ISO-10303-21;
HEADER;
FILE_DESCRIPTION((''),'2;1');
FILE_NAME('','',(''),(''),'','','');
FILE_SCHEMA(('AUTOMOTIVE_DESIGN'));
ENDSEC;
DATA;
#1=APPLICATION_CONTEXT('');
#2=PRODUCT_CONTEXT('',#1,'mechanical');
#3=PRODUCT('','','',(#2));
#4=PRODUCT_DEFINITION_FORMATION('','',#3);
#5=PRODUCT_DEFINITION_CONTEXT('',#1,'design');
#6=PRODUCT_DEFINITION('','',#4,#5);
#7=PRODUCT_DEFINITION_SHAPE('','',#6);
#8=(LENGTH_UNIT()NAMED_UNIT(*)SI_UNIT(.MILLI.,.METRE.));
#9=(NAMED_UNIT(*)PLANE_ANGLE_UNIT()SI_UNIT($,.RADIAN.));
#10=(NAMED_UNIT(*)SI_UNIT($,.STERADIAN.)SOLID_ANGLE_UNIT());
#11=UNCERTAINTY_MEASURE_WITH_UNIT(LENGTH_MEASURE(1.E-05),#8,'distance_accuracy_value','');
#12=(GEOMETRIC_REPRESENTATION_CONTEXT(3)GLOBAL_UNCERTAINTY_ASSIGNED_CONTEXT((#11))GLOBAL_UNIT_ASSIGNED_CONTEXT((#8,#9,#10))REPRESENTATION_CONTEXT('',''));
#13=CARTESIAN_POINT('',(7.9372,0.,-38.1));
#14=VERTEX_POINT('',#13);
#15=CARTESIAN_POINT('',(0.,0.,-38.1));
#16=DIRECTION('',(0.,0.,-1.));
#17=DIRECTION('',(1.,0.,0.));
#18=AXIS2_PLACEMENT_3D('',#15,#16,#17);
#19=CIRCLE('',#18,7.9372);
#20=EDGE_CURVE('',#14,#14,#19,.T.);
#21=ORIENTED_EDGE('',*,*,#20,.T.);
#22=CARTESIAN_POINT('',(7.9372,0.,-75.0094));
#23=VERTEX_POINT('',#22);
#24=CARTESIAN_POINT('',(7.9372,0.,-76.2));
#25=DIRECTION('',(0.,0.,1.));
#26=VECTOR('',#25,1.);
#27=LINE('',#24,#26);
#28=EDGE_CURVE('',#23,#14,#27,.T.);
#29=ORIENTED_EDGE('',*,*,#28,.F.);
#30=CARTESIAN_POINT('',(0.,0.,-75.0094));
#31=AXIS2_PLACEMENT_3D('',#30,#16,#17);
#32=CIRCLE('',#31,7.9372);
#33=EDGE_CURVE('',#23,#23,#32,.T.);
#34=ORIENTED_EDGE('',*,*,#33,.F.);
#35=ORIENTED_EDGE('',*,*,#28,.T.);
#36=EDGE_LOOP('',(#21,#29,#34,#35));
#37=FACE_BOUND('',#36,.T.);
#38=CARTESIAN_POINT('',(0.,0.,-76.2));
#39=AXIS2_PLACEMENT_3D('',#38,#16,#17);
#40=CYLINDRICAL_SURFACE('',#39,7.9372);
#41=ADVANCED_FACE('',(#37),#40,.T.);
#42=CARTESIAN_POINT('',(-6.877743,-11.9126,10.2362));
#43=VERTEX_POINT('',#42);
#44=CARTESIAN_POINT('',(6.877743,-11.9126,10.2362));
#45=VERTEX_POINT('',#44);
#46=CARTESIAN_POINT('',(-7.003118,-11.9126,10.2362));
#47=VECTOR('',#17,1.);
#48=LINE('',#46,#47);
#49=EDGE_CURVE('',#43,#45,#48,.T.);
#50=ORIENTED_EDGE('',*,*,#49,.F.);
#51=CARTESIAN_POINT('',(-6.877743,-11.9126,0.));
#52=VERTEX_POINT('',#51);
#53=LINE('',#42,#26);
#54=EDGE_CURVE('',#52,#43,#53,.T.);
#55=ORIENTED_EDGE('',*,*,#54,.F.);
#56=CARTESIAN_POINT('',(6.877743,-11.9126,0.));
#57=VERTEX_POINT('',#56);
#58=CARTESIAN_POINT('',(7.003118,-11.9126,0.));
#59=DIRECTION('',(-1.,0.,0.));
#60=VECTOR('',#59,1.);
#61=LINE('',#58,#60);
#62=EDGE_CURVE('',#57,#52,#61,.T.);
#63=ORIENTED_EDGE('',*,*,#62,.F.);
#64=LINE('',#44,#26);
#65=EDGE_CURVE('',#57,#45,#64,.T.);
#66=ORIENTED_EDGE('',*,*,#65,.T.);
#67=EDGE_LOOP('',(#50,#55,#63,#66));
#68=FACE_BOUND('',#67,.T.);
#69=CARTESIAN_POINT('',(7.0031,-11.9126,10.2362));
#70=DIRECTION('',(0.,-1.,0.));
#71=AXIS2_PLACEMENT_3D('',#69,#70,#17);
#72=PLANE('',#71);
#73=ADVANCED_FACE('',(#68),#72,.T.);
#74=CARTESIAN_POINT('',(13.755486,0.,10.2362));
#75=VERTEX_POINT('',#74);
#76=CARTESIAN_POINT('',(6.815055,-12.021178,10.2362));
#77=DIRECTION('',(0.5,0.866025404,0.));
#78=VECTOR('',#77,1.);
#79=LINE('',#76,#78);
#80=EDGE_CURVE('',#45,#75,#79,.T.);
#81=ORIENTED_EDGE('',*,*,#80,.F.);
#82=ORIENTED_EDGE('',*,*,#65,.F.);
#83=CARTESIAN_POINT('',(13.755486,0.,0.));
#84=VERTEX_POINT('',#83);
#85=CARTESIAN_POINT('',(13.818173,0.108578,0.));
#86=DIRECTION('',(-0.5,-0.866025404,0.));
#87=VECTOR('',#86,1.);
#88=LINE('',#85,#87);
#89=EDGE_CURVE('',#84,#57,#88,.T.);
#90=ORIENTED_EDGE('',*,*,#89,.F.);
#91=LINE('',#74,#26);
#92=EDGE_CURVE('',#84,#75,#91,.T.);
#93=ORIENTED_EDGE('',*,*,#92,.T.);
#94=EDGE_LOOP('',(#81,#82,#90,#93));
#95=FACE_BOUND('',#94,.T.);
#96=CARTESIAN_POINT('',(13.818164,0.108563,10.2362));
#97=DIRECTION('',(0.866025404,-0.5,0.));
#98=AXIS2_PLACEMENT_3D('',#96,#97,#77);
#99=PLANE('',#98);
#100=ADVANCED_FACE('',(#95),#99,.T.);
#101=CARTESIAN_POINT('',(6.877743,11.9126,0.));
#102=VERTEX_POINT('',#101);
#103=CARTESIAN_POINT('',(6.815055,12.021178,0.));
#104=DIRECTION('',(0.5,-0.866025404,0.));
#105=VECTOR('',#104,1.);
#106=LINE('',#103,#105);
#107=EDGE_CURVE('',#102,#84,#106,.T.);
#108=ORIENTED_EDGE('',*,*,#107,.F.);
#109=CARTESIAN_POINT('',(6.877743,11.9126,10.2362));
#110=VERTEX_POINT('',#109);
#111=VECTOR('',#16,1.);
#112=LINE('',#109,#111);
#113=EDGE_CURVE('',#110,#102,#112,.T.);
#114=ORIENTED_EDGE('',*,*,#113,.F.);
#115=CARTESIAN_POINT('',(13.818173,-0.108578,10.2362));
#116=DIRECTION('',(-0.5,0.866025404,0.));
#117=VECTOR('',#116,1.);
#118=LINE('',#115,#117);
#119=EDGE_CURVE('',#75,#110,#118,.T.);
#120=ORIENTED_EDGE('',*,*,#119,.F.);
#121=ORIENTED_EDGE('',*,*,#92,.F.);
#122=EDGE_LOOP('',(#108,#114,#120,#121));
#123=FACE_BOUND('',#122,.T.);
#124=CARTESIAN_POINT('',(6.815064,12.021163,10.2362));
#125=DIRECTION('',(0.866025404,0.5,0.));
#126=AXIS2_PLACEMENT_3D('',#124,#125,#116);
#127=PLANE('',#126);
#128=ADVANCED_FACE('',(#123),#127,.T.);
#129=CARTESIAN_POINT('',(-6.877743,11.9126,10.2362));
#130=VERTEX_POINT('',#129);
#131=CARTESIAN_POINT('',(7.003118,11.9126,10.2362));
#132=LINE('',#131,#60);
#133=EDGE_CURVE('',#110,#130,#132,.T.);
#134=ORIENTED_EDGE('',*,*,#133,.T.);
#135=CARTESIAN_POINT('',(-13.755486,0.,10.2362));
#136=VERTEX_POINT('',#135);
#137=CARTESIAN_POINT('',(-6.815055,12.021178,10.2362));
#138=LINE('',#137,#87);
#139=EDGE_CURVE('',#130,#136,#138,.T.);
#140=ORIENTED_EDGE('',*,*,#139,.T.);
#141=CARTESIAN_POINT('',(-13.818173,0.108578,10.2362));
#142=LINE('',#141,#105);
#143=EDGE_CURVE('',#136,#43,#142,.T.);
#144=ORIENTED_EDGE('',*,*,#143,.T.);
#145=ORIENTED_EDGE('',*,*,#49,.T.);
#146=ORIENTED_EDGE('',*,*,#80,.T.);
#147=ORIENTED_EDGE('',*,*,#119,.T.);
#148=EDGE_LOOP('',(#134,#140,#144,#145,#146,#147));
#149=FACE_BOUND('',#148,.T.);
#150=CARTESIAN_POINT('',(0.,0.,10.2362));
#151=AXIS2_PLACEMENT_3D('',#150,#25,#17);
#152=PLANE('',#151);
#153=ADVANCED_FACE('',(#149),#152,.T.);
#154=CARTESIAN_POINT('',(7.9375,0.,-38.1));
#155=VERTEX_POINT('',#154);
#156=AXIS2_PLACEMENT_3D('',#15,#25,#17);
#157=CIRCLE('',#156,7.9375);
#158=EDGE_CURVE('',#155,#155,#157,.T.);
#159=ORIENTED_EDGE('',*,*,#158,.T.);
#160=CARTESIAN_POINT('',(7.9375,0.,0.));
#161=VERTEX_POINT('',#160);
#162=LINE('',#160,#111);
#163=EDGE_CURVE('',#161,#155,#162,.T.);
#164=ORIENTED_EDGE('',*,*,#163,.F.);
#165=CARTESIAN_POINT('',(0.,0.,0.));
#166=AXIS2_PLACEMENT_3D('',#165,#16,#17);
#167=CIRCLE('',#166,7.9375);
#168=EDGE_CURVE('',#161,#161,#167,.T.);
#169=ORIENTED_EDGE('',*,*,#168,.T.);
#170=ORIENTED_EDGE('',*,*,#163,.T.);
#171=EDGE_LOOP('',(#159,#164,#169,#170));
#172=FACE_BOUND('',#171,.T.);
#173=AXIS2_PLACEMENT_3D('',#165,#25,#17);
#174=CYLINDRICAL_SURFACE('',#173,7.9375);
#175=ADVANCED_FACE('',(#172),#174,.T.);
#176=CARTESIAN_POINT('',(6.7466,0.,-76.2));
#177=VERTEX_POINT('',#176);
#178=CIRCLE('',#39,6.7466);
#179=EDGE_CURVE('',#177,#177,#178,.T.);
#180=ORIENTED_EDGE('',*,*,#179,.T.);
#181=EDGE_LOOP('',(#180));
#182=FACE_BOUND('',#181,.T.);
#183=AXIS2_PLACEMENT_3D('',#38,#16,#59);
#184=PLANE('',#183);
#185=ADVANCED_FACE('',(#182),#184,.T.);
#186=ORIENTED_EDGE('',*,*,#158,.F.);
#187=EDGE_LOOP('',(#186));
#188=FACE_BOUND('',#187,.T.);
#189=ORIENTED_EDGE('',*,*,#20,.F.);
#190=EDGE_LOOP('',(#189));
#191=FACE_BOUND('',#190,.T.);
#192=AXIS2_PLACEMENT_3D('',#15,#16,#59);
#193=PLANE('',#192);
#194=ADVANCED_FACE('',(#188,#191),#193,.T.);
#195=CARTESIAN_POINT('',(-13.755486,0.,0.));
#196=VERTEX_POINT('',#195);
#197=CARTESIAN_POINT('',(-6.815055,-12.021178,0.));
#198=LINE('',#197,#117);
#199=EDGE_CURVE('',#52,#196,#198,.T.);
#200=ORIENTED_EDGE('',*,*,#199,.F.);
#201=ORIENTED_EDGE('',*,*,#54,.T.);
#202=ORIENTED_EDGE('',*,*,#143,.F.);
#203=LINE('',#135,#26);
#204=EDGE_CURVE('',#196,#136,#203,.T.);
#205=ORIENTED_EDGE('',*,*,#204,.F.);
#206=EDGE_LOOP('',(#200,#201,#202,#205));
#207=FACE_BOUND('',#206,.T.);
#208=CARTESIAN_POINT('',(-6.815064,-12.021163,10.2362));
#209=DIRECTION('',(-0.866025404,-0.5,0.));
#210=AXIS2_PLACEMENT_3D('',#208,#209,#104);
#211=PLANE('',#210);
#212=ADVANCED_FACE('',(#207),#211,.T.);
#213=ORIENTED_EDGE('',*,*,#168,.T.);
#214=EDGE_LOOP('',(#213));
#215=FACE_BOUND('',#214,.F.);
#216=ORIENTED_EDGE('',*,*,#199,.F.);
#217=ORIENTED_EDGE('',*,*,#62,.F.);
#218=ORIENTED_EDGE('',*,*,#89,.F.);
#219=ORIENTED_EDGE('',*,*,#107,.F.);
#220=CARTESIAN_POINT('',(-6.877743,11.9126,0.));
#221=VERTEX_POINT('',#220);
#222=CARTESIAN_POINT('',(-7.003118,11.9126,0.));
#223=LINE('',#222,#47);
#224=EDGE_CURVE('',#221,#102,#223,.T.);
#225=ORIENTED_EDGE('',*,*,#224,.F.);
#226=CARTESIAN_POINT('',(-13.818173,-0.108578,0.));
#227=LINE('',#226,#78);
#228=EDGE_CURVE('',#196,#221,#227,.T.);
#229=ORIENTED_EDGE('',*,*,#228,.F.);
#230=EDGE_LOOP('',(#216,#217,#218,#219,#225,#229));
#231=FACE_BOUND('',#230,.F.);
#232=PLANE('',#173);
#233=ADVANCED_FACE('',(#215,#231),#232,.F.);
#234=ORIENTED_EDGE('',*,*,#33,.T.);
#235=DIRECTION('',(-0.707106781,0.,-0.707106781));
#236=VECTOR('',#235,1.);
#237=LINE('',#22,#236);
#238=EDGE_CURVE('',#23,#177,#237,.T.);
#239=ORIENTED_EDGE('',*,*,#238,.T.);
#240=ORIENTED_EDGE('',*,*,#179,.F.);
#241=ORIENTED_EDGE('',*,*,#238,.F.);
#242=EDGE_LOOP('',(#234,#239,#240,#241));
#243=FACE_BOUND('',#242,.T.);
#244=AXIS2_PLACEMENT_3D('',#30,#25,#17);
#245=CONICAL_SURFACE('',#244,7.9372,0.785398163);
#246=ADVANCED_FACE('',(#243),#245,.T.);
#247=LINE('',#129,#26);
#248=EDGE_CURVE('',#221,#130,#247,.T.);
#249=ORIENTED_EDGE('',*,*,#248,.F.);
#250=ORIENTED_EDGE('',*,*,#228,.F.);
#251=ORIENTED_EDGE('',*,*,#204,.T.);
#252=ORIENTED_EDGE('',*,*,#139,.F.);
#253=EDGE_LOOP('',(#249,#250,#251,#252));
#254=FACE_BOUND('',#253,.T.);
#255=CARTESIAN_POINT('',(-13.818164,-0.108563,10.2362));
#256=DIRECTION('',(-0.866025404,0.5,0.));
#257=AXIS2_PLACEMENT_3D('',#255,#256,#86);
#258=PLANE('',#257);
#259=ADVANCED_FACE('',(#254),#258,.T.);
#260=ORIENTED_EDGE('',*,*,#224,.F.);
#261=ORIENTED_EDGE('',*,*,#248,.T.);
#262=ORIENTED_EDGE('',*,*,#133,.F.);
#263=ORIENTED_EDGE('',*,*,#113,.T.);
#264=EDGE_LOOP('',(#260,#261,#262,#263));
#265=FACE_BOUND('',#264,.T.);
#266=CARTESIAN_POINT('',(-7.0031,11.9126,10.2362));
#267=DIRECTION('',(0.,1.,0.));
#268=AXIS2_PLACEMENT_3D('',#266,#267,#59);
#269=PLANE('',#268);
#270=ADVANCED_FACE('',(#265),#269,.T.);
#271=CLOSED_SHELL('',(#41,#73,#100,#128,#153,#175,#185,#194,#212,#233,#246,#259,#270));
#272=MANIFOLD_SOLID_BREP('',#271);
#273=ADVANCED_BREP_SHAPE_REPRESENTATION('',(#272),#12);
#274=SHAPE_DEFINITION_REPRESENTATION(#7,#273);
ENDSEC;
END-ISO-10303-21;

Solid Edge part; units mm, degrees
sketch "Sketch1" plane through (0, 0, 0) normal (0, 0, 1) x (1, 0, 0)
  circle A0 centre (0, 0) radius 13.8186
  dimension "D1" = 27.6372
extrude "Protrusion1" add sketch "Sketch1" along normal blind 10.2362
sketch "Sketch2" plane through (0, 0, 0) normal (0, 0, -1) x (1, 0, 0)
  circle A0 centre (0, 0) radius 7.9375
extrude "Protrusion2" add sketch "Sketch2" along normal blind 76.2
sketch "Sketch3" plane through (0, 0, -76.2) normal (0, 0, -1) x (1, 0, 0)
  circle A0 centre (0, 0) radius 7.9372
extrude "Cutout1" cut sketch "Sketch3" against normal blind 38.1 flip side to cut
chamfer "Chamfer_1" distance 1.1906 angle 45 1 edges at (-7.9372, 0, -76.2)
sketch "Sketch4" plane through (0, 0, 10.2362) normal (0, 0, 1) x (1, 0, 0)
  line L0 (-7.0031, 11.9126) -> (7.0031, 11.9126)
  dimension "D1" = 23.8252
extrude "Cutout2" cut sketch "Sketch4" against normal up to next material side at (0, 11.9626, 10.2362)
pattern_circular "Pattern1" count 6 over 360 about axis through (0, 0, 10.2362) along (0, 0, 1) of "Cutout2"
properties part number "24100042"
